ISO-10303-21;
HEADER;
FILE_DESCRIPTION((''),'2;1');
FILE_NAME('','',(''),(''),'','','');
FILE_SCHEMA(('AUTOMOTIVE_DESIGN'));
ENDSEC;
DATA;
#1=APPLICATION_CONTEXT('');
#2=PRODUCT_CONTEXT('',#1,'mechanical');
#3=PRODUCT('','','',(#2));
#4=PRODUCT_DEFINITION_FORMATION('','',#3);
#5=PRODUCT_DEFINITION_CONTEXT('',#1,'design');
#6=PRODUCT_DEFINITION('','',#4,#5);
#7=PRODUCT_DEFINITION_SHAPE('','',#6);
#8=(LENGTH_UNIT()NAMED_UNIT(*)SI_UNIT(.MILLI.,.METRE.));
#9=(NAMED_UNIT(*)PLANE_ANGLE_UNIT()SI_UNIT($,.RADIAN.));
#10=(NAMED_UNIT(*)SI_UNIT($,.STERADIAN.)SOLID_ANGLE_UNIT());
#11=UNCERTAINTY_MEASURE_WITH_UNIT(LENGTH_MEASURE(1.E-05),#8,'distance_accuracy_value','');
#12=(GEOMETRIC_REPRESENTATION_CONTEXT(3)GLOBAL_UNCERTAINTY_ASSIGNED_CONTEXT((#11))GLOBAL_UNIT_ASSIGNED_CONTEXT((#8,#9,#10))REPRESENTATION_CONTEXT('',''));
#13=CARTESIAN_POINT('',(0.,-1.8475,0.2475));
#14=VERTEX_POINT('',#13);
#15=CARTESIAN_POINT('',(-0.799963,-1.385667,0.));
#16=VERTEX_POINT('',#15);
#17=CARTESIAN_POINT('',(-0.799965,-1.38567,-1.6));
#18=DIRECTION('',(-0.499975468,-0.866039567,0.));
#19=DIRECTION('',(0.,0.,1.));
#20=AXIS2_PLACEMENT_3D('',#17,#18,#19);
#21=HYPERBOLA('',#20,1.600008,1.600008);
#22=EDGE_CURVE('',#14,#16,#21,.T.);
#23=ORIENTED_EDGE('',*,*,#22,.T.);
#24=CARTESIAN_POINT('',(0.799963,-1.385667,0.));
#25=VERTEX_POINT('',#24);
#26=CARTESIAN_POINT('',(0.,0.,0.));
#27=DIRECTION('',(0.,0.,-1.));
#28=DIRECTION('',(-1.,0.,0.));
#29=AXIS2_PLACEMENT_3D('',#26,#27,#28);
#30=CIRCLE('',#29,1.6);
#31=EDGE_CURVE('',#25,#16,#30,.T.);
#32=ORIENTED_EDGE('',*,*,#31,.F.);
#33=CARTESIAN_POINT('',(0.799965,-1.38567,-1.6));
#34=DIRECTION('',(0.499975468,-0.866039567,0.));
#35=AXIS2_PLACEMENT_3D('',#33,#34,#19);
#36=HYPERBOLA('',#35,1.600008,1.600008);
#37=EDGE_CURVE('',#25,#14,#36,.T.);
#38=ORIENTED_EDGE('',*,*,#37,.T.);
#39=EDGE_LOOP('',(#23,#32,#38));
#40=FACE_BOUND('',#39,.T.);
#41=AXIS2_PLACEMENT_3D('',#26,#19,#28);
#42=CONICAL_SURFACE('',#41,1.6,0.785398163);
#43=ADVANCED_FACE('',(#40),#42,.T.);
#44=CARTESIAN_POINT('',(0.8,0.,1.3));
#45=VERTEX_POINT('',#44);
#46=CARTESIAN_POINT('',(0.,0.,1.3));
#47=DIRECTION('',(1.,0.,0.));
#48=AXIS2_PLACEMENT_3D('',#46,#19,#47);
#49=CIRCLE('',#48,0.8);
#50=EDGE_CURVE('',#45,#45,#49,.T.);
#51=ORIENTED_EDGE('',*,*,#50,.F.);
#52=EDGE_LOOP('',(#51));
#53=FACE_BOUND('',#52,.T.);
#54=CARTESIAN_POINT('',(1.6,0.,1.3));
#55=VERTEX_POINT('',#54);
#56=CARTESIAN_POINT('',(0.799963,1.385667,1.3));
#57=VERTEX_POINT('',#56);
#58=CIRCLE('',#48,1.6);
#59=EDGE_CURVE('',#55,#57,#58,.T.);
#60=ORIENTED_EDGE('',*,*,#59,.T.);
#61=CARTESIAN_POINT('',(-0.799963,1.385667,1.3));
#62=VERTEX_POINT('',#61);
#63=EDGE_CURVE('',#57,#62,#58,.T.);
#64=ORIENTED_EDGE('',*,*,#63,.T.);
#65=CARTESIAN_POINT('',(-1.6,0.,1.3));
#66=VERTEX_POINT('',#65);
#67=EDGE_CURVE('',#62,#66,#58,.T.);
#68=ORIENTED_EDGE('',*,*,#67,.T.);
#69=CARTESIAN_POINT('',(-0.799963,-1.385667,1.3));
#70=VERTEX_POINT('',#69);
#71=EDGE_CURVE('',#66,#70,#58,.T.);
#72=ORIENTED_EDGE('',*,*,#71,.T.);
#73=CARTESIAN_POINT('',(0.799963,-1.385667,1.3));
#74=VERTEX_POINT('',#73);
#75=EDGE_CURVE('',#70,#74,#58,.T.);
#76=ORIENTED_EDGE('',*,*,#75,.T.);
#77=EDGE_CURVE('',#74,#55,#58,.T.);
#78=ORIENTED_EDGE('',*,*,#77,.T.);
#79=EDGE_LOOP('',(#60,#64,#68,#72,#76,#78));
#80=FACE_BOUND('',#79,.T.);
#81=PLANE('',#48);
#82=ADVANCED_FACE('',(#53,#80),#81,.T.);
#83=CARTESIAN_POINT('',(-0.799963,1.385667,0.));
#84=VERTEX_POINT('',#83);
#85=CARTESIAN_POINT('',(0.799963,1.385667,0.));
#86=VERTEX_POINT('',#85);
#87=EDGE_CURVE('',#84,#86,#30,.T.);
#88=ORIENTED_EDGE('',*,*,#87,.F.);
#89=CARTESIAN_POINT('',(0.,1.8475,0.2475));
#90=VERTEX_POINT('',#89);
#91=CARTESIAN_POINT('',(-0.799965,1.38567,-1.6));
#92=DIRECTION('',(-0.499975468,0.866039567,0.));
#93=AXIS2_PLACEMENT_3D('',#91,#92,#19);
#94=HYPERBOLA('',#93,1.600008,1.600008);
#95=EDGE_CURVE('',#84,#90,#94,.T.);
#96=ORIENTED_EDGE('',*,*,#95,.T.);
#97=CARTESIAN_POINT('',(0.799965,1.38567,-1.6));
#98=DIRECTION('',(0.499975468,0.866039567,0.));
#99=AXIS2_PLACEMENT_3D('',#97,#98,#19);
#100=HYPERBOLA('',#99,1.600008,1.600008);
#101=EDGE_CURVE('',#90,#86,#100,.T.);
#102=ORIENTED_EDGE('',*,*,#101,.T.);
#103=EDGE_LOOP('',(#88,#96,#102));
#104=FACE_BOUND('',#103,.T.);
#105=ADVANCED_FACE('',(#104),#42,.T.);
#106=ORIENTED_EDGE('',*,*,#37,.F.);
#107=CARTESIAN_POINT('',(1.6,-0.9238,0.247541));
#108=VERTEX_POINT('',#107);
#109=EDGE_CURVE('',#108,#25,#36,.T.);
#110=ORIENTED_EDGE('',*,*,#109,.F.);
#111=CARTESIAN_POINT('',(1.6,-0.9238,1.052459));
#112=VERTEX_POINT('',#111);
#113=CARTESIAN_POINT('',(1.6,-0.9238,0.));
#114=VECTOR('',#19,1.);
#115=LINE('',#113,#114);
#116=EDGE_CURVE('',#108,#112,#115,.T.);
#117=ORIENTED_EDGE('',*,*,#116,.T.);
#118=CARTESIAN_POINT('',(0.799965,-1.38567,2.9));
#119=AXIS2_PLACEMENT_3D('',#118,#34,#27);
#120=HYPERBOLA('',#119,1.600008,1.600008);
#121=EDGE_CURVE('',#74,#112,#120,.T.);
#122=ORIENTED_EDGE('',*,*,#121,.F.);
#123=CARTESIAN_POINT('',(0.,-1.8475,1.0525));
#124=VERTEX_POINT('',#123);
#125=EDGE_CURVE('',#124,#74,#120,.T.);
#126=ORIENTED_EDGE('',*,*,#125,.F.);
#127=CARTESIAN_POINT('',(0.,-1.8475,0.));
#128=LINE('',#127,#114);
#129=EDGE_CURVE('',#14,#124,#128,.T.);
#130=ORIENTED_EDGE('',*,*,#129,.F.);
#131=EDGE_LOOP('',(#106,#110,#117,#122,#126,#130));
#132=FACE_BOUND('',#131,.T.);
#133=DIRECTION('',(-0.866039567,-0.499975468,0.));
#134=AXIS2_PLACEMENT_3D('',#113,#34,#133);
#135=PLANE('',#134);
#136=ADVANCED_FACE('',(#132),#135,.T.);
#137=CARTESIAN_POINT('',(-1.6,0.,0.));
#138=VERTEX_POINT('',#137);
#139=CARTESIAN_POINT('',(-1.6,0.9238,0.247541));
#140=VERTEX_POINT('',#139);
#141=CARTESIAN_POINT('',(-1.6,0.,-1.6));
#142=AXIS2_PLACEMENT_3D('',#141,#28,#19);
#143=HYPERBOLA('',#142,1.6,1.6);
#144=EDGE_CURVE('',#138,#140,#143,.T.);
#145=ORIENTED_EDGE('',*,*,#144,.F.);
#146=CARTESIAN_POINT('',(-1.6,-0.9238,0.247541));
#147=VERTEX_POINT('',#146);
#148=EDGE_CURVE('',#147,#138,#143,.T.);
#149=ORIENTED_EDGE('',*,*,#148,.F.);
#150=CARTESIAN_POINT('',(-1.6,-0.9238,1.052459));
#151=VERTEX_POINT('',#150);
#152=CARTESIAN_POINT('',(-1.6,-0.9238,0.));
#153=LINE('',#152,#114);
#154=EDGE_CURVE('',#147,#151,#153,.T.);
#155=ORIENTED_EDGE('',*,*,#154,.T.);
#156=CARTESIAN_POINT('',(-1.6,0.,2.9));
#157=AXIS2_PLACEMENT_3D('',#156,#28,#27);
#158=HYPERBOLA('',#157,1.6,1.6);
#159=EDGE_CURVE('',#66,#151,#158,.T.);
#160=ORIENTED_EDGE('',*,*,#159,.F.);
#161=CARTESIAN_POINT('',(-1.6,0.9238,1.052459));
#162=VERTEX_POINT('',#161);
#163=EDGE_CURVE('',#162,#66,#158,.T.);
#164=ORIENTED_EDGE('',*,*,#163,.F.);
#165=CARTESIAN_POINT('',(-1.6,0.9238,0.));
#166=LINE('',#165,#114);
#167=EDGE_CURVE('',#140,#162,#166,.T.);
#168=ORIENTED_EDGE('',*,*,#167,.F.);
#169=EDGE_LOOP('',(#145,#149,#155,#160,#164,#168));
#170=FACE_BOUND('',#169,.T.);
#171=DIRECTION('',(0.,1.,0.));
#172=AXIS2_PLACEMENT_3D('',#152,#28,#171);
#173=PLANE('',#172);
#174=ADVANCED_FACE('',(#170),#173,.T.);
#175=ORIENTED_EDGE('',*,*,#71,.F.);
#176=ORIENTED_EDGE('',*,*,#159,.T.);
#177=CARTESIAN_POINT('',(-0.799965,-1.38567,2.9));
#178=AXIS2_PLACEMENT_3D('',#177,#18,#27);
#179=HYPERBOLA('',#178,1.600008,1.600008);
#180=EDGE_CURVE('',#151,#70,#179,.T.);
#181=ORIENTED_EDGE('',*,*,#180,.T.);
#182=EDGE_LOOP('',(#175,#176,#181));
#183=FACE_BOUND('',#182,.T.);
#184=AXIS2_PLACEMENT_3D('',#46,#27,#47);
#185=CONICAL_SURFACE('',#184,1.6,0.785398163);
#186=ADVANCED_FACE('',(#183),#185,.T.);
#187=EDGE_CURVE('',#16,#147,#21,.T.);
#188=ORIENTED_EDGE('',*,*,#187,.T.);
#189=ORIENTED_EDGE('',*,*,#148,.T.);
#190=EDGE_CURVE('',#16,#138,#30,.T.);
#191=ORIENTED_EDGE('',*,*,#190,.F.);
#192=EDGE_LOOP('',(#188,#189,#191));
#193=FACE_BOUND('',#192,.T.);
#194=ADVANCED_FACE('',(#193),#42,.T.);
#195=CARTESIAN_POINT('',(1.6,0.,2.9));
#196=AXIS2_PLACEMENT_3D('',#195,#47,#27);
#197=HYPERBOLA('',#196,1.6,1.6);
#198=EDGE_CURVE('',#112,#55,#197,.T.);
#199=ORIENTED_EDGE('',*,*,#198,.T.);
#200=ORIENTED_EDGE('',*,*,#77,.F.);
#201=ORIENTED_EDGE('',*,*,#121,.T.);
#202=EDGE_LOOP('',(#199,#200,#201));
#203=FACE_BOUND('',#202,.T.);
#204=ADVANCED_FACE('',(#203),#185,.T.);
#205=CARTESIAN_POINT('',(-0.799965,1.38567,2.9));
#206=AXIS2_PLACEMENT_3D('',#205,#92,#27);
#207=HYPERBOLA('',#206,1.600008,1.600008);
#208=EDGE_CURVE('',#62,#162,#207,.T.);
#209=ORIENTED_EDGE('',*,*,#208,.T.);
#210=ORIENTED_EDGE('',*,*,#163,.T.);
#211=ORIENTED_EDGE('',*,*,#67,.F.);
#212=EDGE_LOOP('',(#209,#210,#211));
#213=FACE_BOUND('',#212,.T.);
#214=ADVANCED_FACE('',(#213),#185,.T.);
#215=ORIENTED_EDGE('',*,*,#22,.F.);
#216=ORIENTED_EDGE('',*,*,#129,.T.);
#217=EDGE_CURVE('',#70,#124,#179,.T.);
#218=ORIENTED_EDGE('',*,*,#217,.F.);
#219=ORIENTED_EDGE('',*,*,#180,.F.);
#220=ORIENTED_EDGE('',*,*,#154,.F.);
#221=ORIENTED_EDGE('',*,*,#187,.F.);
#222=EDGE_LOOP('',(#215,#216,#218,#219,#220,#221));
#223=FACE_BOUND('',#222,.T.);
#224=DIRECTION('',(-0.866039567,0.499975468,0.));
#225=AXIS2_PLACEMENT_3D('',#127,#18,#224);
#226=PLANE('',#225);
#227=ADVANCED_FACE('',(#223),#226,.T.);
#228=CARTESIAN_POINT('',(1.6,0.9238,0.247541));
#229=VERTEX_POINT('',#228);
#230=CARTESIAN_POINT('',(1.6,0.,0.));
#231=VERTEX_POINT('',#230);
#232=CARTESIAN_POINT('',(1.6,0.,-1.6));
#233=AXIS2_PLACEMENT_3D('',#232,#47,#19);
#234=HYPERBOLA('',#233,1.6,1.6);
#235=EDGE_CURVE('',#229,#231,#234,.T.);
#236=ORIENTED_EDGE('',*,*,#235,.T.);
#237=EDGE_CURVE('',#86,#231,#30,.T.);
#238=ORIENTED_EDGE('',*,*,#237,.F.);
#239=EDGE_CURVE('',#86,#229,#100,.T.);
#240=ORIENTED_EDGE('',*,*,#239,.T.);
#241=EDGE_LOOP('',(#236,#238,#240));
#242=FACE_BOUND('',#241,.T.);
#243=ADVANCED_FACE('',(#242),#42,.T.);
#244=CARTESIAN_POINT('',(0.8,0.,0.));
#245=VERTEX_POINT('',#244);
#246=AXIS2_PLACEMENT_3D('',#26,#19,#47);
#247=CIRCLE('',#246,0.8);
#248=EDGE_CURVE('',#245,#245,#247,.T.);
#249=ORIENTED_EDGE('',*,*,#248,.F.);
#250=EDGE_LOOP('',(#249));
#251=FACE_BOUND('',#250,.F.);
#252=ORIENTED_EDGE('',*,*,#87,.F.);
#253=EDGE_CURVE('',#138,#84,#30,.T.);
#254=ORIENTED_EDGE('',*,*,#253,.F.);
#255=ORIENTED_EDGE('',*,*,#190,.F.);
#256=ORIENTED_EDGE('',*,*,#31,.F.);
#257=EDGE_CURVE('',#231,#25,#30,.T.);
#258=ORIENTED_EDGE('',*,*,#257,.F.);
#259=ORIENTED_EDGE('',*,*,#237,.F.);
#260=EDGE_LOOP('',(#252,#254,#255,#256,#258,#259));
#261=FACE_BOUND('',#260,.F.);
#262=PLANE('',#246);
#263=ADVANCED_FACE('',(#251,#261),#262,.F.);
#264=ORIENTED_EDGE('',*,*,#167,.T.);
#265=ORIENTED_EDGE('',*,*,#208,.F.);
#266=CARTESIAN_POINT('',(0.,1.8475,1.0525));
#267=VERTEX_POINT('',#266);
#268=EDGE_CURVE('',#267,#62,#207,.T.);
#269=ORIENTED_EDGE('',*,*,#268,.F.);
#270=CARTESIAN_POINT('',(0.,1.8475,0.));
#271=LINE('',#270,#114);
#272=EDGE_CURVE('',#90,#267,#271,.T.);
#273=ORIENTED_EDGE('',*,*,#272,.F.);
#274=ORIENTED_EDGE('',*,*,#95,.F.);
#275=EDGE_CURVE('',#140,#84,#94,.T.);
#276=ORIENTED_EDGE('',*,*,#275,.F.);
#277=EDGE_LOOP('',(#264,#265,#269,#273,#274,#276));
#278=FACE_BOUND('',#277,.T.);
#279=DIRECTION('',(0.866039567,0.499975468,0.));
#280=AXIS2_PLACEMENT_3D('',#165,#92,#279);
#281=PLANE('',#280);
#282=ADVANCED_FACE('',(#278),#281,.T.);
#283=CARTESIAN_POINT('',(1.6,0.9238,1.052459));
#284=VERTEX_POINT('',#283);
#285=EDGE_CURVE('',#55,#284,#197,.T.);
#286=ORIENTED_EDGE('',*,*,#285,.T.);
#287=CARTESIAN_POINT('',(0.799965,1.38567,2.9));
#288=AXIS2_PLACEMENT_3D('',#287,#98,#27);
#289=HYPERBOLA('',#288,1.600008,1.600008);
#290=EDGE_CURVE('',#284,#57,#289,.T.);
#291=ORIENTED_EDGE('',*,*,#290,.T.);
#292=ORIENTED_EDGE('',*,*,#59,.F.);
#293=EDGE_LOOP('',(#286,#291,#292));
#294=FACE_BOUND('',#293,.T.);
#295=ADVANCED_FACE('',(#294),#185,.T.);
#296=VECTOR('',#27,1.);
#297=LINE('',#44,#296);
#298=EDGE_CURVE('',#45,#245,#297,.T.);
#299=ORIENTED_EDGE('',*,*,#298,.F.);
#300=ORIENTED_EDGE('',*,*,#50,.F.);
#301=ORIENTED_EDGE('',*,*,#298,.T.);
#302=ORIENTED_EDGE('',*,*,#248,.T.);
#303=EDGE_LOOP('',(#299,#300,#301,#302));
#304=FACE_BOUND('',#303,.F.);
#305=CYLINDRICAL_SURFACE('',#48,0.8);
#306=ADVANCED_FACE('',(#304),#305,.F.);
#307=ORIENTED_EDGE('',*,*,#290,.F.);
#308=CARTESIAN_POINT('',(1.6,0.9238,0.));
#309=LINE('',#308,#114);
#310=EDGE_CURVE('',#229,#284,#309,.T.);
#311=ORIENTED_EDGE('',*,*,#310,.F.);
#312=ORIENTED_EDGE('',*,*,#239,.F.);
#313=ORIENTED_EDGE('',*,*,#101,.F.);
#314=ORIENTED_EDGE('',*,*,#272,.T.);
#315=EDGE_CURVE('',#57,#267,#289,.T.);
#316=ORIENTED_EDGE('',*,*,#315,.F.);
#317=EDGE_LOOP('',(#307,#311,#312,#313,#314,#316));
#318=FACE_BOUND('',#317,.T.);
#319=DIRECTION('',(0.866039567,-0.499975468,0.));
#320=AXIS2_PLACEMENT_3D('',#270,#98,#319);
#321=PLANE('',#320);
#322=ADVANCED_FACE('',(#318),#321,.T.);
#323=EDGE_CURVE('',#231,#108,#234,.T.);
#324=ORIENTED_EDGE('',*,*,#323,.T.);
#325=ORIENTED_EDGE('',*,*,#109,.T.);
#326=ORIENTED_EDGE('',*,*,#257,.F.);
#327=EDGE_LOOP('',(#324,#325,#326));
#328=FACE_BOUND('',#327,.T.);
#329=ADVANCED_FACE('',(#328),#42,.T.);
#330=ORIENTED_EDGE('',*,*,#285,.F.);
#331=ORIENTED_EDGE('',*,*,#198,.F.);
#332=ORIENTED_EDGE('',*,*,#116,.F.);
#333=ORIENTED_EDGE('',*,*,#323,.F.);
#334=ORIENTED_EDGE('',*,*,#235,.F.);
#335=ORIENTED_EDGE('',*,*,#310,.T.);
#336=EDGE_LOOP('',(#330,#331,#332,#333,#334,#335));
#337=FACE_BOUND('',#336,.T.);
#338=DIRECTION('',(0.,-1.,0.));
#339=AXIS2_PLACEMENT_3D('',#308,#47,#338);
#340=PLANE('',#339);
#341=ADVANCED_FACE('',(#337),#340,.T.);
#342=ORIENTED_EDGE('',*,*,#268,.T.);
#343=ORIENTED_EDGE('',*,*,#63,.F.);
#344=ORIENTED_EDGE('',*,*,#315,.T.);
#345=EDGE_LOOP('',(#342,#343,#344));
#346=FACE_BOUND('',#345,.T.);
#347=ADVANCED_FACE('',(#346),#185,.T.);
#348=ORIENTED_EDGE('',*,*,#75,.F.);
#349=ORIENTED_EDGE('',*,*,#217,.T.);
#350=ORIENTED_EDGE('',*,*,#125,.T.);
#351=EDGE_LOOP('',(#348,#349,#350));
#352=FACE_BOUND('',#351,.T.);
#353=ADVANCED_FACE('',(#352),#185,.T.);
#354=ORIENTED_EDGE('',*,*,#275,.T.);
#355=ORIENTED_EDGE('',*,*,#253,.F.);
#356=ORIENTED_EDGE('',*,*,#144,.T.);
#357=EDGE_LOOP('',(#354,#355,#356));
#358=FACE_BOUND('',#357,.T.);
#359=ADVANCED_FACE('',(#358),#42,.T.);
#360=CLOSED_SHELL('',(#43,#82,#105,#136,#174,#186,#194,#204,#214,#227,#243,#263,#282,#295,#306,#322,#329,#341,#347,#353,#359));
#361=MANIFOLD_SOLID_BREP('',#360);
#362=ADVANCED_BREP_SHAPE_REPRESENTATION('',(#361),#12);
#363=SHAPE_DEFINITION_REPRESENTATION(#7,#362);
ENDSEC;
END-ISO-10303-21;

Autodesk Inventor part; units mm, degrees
ref_plane "YZ Plane" through (0, 0, 0) normal (1, 0, 0) x (0, 1, 0)
ref_plane "XZ Plane" through (0, 0, 0) normal (0, 1, 0) x (-1, 0, 0)
ref_plane "XY Plane" through (0, 0, 0) normal (0, 0, 1) x (1, 0, 0)
sketch "Sketch1" plane through (0, 0, 0) normal (0, 0, 1) x (1, 0, 0)
  line L0 (0, 1.8475) -> (1.6, 0.9238)
  line L1 (1.6, 0.9238) -> (1.6, -0.9238)
  line L2 (1.6, -0.9238) -> (0, -1.8475)
  line L3 (0, -1.8475) -> (-1.6, -0.9238)
  line L4 (-1.6, -0.9238) -> (-1.6, 0.9238)
  line L5 (-1.6, 0.9238) -> (0, 1.8475)
  point P0 (0, 0)
  point P1 (0, 0)
  dimension "d0" = 3.2
extrude "Main Body" add sketch "Sketch1" along normal blind 1.3
sketch "Sketch2" plane through (0, 0, 1.3) normal (0, 0, 1) x (1, 0, 0)
  circle A0 centre (0, 0) radius 1.6
  dimension "d3" = 3.2
extrude "Front Taper" cut sketch "Sketch2" against normal up to surface (1.3 mm away) draft 45 keep common part
sketch "Sketch3" plane through (0, 0, 0) normal (0, 0, -1) x (-1, 0, 0)
  circle A0 centre (0, 0) radius 1.6
  dimension "d6" = 3.2
extrude "Back Taper" cut sketch "Sketch3" against normal up to surface (1.3 mm away) draft 45 keep common part
sketch "Sketch4" plane through (0, 0, 1.3) normal (0, 0, 1) x (1, 0, 0)
  circle A0 centre (0, 0) radius 0.8
  dimension "d9" = 1.6
extrude "Center Hole" cut sketch "Sketch4" against normal up to surface (1.3 mm away)
thread "Thread1" size "M1.6x0.35" class "6H" standard "ANSI Metric M Profile" full length
sketch "Sketch5" plane through (0, 0, 0) normal (1, 0, 0) x (0, 1, 0)
  line L0 (-1.0281, 1.9183) -> (-0.8, 2.05)
  line L1 (-0.8, 2.05) -> (-0.8, 1.7)
  line L2 (-0.8, 1.7) -> (-1.0281, 1.8317)
  line L3 (-1.1031, 1.875) -> (-0.8, 1.875) construction
  line L4 (-0.8, 1.3) -> (0.8, 1.3) construction
  arc A0 (-1.0281, 1.9183) -> (-1.0281, 1.8317) centre (-1.0031, 1.875) ccw
  point P0 (0, 0)
  point P1 (-0.901, 1.875)
  dimension "d14" = 0.35
  dimension "d15" = 0.4
  dimension "d16" = 0
  dimension "d17" = 0.05
coil "Coil1" [suppressed]
equation "\"d0\" = size"
equation "\"d1\" = thickness"
equation "\"d3\" = d0"
equation "\"d6\" = d0"
equation "\"d9\" = nominalDiameter"
equation "\"d14\" = threadPitch"
equation "\"d15\" = 1.14286 * threadPitch"
equation "\"d17\" = 0.142857 * threadPitch"
equation "\"d18\" = threadPitch"
equation "\"d19\" = 1.57143 * thickness"
equation "\"size\" = 3.2"
equation "\"thickness\" = 1.3"
equation "\"nominalDiameter\" = 1.6"
equation "\"threadPitch\" = 0.35"
properties part number "M1.6" material "Steel, Galvanized"
